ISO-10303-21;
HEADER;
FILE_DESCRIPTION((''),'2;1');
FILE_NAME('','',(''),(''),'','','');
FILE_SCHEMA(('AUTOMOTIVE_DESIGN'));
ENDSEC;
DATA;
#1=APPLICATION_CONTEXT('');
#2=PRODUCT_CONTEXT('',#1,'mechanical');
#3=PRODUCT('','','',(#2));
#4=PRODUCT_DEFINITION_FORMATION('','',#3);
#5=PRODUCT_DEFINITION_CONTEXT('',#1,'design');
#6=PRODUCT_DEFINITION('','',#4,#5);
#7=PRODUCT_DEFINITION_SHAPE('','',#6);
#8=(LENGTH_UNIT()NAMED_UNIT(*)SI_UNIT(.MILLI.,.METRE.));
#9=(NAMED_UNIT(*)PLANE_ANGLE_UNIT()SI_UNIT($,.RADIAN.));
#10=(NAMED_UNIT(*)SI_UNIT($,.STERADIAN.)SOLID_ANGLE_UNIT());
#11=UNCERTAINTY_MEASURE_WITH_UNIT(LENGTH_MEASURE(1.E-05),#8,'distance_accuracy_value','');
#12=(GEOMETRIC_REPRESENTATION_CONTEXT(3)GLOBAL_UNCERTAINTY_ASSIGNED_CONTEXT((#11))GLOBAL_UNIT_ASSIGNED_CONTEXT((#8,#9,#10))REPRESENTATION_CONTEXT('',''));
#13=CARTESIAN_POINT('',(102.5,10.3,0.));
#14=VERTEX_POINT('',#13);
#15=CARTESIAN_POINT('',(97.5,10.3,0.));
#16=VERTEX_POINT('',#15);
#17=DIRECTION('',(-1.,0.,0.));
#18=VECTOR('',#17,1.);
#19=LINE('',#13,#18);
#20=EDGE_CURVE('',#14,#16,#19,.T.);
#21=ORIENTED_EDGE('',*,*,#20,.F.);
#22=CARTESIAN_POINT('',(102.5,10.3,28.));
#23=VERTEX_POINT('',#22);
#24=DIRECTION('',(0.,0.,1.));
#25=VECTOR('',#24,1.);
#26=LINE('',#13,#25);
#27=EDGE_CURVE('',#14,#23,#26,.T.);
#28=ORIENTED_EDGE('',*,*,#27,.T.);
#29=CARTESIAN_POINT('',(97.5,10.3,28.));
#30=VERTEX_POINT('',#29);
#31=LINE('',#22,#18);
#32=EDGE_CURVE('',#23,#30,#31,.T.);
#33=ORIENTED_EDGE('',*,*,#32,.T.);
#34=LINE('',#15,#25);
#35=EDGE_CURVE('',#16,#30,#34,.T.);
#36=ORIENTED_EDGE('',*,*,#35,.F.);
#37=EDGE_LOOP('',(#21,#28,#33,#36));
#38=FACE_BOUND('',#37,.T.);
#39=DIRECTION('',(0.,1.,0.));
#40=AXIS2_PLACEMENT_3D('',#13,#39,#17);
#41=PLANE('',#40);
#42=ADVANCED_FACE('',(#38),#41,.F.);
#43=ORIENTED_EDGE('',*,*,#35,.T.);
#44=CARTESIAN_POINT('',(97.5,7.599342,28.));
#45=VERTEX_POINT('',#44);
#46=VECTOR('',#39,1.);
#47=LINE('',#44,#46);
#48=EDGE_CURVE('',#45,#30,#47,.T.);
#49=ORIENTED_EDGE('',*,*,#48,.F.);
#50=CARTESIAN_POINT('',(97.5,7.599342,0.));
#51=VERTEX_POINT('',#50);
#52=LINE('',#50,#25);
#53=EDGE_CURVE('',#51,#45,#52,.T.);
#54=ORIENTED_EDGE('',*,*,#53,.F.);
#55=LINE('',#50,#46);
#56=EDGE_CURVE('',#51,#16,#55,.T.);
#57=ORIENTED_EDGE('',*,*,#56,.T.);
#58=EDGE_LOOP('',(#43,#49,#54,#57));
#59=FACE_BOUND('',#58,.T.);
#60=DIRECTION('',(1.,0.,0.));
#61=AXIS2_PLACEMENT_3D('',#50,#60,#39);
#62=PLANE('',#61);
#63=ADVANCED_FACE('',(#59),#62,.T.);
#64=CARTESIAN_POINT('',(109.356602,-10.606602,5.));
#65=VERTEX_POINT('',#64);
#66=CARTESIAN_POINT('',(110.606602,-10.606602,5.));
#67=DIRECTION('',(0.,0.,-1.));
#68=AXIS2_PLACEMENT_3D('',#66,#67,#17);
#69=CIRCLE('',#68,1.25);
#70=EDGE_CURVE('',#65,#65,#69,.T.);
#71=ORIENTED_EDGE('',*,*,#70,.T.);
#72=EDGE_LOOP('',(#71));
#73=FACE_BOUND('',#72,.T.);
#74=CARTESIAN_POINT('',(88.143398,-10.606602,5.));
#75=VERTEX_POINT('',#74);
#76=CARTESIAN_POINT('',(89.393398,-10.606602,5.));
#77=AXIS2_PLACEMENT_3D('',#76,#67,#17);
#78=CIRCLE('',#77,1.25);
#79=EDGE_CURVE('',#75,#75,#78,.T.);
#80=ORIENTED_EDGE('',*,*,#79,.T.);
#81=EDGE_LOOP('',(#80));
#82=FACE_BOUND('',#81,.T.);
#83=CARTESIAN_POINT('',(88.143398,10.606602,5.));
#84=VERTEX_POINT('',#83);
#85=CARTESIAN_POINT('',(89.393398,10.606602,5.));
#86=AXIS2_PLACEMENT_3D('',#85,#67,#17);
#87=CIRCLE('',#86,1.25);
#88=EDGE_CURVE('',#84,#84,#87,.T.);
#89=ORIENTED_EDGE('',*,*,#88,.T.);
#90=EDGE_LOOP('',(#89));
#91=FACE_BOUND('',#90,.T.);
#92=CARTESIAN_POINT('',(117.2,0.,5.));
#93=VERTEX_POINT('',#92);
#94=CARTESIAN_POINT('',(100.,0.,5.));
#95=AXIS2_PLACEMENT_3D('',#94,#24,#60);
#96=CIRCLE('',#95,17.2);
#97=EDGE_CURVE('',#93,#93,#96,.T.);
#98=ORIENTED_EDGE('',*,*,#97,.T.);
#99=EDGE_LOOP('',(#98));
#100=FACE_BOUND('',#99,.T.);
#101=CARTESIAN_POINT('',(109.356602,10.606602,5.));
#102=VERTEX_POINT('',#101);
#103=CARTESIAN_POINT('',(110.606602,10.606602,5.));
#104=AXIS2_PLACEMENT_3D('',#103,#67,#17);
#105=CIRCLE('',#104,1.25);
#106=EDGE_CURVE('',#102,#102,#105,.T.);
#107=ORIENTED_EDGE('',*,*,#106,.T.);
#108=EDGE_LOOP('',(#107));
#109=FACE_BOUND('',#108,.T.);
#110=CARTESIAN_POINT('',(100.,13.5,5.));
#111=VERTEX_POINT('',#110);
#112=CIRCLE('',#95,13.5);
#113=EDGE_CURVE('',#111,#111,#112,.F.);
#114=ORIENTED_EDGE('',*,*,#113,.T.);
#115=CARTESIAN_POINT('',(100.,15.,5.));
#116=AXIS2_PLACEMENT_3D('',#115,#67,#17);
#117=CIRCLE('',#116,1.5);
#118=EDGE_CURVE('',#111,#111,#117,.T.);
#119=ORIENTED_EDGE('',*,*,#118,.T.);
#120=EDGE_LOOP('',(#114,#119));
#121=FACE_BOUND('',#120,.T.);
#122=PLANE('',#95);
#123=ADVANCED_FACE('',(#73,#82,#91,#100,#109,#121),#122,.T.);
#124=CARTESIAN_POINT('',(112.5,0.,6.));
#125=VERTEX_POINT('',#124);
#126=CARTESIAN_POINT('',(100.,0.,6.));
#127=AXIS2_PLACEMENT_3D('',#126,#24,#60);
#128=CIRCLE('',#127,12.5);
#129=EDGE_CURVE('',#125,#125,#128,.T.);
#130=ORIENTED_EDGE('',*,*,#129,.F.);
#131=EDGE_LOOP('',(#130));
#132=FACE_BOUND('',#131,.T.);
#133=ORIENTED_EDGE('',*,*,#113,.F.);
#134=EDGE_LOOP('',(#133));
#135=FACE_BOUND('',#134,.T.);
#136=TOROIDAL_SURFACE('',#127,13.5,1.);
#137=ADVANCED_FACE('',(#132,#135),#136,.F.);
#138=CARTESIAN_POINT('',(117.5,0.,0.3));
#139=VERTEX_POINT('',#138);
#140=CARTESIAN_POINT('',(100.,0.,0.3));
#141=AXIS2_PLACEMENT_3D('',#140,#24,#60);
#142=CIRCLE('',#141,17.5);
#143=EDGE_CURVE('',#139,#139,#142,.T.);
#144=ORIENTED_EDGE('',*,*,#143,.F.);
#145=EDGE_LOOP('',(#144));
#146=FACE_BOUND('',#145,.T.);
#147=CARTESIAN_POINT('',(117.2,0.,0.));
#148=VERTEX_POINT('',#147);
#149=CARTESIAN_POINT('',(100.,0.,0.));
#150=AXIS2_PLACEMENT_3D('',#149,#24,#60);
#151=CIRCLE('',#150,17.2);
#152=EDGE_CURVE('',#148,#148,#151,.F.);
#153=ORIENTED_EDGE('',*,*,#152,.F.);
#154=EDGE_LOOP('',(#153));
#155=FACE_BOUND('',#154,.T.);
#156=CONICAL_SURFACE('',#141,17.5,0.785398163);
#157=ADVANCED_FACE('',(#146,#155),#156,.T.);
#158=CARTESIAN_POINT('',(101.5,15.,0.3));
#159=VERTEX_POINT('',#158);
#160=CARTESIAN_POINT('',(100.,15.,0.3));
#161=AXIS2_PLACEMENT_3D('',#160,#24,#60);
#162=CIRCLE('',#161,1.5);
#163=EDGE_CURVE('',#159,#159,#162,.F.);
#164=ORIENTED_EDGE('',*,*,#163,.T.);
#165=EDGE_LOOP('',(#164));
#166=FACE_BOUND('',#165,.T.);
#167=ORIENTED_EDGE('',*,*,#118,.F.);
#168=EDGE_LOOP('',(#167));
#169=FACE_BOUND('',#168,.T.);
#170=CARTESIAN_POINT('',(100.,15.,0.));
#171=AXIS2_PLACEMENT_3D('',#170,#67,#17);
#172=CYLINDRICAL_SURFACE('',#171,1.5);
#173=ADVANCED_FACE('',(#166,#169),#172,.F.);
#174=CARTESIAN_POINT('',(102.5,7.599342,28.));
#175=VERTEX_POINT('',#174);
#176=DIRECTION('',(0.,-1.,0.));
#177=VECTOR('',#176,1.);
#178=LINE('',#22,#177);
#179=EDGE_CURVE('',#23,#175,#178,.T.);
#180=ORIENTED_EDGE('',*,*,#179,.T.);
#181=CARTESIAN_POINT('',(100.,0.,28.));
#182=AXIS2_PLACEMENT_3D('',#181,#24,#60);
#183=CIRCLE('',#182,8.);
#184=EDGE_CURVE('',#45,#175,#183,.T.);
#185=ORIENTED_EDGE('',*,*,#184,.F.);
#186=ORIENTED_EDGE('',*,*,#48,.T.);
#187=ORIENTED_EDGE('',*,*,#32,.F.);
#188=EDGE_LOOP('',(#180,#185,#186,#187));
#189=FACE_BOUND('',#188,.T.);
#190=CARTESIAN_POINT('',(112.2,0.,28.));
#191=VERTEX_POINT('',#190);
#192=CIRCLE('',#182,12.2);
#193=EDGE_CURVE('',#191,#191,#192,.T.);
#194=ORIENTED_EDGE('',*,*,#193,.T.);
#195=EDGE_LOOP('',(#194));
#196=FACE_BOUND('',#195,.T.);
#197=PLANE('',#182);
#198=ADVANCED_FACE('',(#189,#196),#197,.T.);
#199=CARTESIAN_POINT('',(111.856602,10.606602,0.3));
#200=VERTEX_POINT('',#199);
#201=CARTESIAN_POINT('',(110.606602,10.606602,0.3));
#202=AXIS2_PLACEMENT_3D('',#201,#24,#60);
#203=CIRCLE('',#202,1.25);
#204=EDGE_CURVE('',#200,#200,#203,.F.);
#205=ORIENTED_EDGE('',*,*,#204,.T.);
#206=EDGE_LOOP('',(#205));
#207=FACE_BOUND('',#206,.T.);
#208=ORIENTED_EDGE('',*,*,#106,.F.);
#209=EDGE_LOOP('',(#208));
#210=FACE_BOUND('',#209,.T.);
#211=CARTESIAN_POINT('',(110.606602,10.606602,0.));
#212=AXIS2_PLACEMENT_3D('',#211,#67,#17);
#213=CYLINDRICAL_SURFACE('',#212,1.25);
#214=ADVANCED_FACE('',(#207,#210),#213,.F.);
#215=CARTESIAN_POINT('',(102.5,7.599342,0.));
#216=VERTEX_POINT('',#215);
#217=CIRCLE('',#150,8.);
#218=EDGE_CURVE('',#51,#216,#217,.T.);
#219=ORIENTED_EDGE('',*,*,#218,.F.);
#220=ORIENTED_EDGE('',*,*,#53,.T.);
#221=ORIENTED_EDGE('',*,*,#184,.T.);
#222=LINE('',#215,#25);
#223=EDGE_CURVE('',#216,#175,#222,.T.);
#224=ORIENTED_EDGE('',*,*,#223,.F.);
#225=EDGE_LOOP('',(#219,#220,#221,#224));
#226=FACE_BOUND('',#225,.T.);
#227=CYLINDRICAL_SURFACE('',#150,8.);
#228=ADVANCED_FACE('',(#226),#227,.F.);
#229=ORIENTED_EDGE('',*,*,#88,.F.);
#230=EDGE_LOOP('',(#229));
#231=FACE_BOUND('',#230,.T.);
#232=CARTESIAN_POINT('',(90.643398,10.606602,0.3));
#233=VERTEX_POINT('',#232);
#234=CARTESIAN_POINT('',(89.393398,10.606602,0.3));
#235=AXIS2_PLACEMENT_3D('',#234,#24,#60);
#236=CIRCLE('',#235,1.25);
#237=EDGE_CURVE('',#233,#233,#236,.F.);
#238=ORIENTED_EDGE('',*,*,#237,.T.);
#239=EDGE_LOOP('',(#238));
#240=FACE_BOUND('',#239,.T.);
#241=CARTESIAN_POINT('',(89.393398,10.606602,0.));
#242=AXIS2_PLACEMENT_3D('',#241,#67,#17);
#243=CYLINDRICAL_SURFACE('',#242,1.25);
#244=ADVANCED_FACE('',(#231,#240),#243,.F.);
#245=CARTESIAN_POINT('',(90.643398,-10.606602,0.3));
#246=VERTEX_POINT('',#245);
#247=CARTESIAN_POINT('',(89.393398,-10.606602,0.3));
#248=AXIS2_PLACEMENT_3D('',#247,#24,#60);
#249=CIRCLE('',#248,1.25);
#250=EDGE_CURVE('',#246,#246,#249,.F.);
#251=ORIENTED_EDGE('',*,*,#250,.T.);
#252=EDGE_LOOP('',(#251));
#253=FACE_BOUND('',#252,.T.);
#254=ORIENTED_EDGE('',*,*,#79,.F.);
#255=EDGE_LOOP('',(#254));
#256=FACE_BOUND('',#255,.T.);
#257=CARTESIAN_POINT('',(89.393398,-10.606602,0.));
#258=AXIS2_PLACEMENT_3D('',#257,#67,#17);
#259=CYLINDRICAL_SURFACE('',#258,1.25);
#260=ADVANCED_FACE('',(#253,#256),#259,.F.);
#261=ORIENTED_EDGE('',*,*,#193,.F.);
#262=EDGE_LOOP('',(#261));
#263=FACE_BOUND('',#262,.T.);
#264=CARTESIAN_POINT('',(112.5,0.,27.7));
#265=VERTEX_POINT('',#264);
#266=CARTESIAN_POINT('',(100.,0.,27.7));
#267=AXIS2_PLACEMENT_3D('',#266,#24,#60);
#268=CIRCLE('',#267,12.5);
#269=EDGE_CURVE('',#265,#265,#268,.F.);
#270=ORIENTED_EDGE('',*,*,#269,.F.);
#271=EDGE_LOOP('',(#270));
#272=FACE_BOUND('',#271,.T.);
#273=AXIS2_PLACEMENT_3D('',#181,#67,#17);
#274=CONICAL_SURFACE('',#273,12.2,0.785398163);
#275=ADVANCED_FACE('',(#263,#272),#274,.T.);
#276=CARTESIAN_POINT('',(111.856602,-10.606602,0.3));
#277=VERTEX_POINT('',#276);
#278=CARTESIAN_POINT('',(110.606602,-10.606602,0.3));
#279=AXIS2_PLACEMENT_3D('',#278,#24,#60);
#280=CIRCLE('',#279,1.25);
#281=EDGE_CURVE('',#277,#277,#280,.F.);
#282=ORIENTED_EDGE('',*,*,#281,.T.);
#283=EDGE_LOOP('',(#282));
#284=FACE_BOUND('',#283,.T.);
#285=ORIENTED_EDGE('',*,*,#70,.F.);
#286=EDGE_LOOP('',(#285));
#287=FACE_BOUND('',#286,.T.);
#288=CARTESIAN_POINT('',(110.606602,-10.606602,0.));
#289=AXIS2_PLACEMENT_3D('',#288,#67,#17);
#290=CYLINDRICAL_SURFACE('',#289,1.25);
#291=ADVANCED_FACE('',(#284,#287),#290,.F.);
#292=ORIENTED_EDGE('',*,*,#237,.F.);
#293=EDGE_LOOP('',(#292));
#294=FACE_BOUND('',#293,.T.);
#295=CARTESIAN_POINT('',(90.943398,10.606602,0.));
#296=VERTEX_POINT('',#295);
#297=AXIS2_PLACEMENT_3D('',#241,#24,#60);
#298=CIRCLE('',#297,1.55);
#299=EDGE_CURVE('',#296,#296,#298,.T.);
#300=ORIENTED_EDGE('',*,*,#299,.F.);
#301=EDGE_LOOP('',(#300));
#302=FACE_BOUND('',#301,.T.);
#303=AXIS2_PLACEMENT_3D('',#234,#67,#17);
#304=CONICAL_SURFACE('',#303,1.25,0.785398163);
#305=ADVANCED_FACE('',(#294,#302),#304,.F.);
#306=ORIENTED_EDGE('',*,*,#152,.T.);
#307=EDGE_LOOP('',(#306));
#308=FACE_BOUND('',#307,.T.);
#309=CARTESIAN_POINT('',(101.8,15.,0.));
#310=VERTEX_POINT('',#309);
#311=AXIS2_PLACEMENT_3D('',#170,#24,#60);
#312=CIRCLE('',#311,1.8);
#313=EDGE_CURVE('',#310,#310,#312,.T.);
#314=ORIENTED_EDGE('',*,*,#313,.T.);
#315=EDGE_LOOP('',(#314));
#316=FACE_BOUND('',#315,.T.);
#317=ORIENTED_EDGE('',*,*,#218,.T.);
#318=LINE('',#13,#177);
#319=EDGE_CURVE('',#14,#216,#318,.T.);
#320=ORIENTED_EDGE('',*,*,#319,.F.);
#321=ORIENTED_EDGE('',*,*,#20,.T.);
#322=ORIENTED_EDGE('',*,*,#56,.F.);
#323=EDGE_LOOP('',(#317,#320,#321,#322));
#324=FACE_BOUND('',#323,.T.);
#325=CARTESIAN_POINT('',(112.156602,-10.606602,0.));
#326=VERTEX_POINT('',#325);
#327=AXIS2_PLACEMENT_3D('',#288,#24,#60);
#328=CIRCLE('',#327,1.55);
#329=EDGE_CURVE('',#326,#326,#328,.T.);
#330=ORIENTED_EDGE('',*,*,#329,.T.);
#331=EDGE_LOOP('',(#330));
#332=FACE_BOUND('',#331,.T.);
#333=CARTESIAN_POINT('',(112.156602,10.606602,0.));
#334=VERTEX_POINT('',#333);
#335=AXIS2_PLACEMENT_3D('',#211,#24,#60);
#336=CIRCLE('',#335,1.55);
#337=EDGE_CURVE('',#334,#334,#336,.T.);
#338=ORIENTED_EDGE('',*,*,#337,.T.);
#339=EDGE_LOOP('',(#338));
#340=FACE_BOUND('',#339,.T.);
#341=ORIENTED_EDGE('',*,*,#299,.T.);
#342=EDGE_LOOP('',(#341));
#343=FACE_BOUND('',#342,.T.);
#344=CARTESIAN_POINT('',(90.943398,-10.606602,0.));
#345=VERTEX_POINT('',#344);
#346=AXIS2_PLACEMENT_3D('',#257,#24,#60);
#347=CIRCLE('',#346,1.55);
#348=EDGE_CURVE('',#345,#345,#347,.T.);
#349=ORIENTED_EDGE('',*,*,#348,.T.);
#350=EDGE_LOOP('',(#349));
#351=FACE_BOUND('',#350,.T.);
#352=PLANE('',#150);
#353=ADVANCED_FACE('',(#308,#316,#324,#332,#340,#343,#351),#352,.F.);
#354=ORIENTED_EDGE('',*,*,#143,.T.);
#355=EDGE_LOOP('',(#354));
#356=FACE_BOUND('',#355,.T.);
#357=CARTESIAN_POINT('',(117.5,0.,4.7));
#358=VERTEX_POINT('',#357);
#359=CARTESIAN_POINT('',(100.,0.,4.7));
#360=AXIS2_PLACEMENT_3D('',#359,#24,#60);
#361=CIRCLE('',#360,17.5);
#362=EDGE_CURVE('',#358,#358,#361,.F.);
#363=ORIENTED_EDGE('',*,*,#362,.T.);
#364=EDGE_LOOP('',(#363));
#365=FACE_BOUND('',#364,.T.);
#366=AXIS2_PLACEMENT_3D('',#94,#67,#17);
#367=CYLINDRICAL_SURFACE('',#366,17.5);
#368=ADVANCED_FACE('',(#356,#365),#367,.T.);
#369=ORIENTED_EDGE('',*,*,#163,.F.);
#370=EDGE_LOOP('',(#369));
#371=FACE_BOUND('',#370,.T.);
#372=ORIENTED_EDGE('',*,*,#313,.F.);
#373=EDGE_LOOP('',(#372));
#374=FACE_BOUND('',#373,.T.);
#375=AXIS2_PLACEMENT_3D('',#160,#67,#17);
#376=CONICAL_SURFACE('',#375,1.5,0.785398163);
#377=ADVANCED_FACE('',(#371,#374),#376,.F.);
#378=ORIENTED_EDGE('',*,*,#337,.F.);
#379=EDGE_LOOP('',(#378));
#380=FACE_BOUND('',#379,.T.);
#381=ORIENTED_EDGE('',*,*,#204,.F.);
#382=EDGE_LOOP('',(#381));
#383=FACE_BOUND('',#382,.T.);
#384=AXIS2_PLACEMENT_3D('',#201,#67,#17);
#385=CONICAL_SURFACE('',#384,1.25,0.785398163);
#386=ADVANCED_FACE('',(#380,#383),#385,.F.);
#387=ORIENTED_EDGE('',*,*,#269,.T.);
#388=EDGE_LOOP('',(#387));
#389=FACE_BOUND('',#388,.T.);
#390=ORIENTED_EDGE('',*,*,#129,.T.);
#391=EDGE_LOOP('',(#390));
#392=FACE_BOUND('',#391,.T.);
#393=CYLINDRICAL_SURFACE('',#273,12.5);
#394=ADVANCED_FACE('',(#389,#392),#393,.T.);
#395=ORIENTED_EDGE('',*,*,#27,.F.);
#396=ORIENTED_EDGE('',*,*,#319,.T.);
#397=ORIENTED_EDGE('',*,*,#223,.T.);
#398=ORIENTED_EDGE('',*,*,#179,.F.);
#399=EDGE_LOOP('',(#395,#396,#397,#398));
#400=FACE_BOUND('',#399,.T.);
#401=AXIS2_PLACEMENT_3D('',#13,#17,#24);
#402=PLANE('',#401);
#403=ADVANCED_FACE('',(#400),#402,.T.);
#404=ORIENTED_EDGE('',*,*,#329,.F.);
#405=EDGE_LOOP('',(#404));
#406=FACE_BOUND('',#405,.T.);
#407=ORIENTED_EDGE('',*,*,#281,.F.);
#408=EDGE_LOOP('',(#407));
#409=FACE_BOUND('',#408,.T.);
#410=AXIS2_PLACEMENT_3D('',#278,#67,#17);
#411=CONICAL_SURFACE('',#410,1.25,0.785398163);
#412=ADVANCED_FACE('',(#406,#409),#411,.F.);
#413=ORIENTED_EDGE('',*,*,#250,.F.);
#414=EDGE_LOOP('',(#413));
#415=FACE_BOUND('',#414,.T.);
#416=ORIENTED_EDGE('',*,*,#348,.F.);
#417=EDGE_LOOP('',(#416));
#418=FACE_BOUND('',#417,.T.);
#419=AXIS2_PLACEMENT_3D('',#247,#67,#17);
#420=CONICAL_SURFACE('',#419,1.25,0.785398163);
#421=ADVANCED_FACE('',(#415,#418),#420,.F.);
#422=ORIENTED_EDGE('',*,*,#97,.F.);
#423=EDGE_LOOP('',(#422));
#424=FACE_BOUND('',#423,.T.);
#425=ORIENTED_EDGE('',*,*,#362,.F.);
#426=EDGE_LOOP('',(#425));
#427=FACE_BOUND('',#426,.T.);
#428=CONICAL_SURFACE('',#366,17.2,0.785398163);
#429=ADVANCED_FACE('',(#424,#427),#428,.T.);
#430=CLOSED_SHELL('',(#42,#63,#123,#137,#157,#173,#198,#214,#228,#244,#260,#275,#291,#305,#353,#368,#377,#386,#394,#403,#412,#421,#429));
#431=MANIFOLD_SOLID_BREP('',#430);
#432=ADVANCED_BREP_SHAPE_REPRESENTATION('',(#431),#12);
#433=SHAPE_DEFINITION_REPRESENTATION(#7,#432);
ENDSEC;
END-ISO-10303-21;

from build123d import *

# Parameters (mm, degrees)
SKETCH1_R             = 17.5
BOSS_EXTRUDE1_DEPTH   = 5
F_3_0MM_DOWEL_HOLE1_D = 3
M3X0_5_TAPPED_HOLE1_D = 2.5
SKETCH10_R            = 12.5
BOSS_EXTRUDE2_DEPTH   = 23
CHAMFER1_SIZE         = 0.3
KEYWAY_DEPTH          = 39.539297239
FILLET1_R             = 1


with BuildPart() as part:
    # Sketch1 → Boss-Extrude1 (new body)
    with BuildSketch(Plane.XY):
        with Locations((100, 0)):
            Circle(SKETCH1_R)
    extrude(amount=BOSS_EXTRUDE1_DEPTH)

    # Ø3.0mm Dowel Hole1 (through all)
    with Locations(Plane(origin=(0, 0, 0), x_dir=(-1, 0, 0), z_dir=(0, 0, -1))):
        with Locations((-100, 15)):
            Hole(F_3_0MM_DOWEL_HOLE1_D / 2)

    # M3x0.5 Tapped Hole1 (through all)
    with Locations(Plane(origin=(0, 0, 0), x_dir=(-1, 0, 0), z_dir=(0, 0, -1))):
        with Locations((-110.606601718, 10.606601718), (-89.393398282, 10.606601718), (-110.606601718, -10.606601718), (-89.393398282, -10.606601718)):
            Hole(M3X0_5_TAPPED_HOLE1_D / 2)

    # Sketch10 → Boss-Extrude2 (add)
    with BuildSketch(Plane.XY.offset(5)):
        with Locations((100, 0)):
            Circle(SKETCH10_R)
    extrude(amount=BOSS_EXTRUDE2_DEPTH)

    # Chamfer1
    chamfer1_edges = [part.edges().sort_by_distance(p)[0] for p in [
        (88.143398282, -10.606601718, 0),
        (82.5, 0, 0),
        (109.356601718, -10.606601718, 0),
        (88.143398282, 10.606601718, 0),
        (109.356601718, 10.606601718, 0),
        (87.5, 0, 28),
        (82.5, 0, 5),
        (98.5, 15, 0),
    ]]
    chamfer(chamfer1_edges, length=CHAMFER1_SIZE)

    # KeySketch → Keyway (cut, through all)
    with BuildSketch(Plane(origin=(101.36896109, 1.08062806, 28), x_dir=(1, 0, 0), z_dir=(0, 0, 1))):
        with BuildLine():
            Line((-3.86896109, 6.518714017), (-3.86896109, 9.21937194))
            Line((-3.86896109, 9.21937194), (1.13103891, 9.21937194))
            Line((1.13103891, 9.21937194), (1.13103891, 6.518714017))
            ThreePointArc((1.13103891, 6.518714017), (-1.36896109, -9.08062806), (-3.86896109, 6.518714017))
        make_face()
    extrude(amount=-KEYWAY_DEPTH, mode=Mode.SUBTRACT)

    # Fillet1
    fillet1_edges = [part.edges().sort_by_distance(p)[0] for p in [
        (87.5, 0, 5),
    ]]
    fillet(fillet1_edges, radius=FILLET1_R - 0.0001)  # a hair under: the kernel refuses the full size


solid = part.part
